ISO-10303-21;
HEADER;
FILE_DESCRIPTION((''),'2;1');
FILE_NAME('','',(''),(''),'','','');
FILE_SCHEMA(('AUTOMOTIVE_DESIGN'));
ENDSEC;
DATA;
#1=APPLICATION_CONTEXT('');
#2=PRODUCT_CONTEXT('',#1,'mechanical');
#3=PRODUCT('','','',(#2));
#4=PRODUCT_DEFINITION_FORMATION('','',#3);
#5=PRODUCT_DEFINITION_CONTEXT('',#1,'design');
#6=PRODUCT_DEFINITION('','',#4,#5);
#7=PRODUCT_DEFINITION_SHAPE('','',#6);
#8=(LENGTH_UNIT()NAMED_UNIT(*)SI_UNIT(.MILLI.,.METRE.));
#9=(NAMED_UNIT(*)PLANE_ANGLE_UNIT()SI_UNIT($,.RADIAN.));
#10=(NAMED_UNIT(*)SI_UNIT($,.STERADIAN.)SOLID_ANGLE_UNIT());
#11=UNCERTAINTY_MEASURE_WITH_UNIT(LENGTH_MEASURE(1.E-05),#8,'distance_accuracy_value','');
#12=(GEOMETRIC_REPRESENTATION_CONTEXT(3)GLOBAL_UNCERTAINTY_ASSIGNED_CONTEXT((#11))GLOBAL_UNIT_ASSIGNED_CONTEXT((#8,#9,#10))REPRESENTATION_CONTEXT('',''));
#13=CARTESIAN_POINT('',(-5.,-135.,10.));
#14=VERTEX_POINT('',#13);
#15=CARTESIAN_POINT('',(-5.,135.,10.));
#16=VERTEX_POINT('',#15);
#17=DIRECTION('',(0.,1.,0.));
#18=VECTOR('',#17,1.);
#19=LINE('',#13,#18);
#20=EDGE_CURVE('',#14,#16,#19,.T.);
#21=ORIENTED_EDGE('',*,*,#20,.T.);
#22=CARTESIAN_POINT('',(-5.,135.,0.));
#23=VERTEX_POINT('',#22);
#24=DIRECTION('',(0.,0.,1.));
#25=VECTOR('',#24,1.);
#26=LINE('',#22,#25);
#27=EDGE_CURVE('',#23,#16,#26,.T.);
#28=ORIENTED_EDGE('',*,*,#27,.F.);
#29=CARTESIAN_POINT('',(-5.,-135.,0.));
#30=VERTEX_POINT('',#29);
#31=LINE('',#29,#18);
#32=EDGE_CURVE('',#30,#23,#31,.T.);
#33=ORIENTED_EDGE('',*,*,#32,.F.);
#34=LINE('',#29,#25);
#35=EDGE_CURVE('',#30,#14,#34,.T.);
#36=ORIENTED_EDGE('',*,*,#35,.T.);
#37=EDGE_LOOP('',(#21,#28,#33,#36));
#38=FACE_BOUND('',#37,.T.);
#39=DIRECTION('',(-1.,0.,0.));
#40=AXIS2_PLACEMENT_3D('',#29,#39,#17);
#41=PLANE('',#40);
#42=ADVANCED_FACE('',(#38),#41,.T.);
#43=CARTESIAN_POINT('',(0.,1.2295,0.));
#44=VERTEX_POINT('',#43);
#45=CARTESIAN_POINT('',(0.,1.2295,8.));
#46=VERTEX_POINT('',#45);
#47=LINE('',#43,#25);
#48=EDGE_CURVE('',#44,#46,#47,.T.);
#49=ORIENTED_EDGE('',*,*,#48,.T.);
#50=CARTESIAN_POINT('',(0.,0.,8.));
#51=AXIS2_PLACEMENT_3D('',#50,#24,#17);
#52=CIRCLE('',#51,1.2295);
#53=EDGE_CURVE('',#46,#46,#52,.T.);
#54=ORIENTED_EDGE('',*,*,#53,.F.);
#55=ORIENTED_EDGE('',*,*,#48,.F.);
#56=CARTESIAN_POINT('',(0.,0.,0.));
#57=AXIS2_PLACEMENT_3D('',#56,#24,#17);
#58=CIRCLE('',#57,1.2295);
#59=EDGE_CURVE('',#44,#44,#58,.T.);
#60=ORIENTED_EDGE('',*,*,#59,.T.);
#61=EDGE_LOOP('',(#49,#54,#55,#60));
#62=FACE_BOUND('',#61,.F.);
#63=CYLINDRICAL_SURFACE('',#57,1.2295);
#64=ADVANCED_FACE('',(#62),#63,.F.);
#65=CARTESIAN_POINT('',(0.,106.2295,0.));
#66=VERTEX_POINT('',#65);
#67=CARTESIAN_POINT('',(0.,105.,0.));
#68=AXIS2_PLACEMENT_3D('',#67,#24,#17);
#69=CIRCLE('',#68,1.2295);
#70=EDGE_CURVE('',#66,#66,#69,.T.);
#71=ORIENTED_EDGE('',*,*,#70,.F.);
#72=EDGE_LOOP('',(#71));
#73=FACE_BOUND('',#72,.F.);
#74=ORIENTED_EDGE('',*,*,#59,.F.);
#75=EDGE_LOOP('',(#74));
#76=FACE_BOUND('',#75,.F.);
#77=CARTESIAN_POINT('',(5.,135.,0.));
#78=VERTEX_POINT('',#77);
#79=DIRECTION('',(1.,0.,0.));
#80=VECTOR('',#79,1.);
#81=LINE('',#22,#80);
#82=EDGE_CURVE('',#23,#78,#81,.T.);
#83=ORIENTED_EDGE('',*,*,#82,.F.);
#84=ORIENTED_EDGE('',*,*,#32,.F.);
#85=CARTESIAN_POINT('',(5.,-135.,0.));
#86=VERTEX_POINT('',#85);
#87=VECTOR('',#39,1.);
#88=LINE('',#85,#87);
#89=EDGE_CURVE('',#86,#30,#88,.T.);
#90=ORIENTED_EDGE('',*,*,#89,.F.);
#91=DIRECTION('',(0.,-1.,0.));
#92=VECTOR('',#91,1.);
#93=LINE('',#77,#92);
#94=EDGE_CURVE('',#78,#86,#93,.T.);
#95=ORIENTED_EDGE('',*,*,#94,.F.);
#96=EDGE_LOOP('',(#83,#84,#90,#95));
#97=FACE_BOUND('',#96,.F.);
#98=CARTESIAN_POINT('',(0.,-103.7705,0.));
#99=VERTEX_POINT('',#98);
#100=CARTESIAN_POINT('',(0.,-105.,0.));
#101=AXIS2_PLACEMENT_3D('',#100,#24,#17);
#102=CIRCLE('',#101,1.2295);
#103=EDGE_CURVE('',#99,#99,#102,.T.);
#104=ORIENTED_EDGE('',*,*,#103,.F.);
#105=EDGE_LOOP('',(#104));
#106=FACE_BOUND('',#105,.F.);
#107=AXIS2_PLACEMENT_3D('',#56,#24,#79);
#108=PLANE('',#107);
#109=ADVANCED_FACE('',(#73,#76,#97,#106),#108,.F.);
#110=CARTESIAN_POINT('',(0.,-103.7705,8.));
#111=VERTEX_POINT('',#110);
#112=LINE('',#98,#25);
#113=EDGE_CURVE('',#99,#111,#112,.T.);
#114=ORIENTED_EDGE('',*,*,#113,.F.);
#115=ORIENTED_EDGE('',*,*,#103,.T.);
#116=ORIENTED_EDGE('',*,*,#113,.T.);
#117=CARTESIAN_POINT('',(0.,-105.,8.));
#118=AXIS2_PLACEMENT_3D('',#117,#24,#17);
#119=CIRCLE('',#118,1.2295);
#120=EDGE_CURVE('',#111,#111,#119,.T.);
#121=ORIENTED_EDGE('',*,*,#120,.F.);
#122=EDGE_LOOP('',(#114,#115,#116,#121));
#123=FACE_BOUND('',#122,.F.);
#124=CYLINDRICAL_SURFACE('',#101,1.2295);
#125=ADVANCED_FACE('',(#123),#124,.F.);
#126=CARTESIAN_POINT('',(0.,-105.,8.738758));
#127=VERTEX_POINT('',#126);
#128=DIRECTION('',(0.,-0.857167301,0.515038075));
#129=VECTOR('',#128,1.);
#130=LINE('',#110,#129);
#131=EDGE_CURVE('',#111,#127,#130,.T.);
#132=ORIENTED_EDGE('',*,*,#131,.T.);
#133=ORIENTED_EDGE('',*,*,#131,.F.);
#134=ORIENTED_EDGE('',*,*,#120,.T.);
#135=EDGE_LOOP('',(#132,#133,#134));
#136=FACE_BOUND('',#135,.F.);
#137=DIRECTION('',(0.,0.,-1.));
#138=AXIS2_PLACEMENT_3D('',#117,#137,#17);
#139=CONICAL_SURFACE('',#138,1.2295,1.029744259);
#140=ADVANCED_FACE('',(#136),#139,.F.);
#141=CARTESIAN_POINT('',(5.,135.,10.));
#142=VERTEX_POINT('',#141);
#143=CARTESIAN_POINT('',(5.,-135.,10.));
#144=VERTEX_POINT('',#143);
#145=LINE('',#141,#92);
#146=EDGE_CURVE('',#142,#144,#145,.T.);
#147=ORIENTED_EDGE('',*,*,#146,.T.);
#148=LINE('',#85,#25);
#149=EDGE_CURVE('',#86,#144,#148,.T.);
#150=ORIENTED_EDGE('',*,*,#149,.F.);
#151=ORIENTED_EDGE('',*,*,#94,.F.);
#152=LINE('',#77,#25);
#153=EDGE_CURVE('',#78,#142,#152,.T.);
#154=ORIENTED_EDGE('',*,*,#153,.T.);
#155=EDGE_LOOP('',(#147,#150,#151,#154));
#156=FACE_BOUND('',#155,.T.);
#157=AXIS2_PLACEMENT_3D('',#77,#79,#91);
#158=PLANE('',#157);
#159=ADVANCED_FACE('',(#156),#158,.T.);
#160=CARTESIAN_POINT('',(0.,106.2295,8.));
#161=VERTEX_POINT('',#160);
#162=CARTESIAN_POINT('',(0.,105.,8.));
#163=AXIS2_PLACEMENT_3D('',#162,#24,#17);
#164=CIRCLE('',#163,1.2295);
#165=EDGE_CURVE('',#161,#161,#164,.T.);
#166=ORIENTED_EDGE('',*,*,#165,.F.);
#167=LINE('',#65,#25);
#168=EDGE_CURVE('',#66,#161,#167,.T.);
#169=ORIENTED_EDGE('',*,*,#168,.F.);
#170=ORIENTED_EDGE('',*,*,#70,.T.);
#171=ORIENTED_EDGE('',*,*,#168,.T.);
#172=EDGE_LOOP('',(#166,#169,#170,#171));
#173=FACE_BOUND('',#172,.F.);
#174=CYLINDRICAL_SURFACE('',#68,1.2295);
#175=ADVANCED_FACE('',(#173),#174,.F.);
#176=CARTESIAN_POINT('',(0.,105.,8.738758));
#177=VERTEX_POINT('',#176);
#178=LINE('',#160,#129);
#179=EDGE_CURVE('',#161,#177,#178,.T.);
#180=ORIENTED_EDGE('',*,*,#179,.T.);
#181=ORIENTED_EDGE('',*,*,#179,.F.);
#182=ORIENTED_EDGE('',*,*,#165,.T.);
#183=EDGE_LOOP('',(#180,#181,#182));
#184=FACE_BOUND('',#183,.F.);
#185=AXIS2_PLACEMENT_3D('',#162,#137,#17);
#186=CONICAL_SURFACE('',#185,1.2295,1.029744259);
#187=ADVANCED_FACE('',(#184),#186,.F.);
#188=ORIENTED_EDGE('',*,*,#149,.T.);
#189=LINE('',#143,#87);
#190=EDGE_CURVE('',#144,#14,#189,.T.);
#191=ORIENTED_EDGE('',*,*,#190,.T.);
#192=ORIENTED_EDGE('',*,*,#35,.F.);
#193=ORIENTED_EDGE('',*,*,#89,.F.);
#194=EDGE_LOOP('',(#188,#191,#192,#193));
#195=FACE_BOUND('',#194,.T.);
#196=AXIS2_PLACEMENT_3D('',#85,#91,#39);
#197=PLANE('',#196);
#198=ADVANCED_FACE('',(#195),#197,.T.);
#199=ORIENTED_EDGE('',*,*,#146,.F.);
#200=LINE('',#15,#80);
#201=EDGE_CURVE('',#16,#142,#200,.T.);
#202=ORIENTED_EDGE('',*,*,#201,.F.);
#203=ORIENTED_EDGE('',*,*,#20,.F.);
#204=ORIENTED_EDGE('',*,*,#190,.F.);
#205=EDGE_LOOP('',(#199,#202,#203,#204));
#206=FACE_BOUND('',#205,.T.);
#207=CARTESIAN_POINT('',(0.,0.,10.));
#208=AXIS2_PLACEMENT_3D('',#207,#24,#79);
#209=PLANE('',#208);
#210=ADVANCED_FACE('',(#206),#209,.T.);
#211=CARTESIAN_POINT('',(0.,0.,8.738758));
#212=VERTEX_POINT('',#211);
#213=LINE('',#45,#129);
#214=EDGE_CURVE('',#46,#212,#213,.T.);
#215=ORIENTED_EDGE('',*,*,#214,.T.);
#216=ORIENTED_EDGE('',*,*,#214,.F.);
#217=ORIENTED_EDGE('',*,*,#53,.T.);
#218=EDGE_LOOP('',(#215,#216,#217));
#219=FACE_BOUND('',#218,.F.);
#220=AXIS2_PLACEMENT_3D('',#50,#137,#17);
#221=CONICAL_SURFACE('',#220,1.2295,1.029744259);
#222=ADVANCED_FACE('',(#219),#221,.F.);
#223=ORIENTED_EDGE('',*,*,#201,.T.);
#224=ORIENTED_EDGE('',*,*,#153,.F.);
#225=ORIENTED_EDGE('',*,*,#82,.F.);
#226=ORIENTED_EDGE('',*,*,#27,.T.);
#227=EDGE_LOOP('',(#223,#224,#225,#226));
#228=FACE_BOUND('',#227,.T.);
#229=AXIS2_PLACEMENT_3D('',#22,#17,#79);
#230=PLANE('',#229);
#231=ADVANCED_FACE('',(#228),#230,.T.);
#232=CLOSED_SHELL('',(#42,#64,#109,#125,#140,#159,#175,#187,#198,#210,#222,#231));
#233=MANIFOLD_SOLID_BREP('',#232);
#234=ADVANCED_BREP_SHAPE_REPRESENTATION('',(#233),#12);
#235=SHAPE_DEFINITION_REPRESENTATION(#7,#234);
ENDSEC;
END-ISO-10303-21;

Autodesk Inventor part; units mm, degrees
ref_plane "YZ Plane" through (0, 0, 0) normal (1, 0, 0) x (0, 1, 0)
ref_plane "XZ Plane" through (0, 0, 0) normal (0, 1, 0) x (-1, 0, 0)
ref_plane "XY Plane" through (0, 0, 0) normal (0, 0, 1) x (1, 0, 0)
sketch "Esboço1" plane through (0, 0, 0) normal (0, 0, 1) x (1, 0, 0)
  line L0 (-7, 0) -> (7, 0) construction
  line L1 (0, -189) -> (0, 189) construction
  line L2 (-5, 135) -> (5, 135)
  line L3 (5, 135) -> (5, -135)
  line L4 (5, -135) -> (-5, -135)
  line L5 (-5, -135) -> (-5, 135)
  point P0 (0, 0)
  point P1 (0, -105)
  point P2 (0, 0)
  point P3 (0, 105)
  dimension "d0" = 10
  dimension "d1" = 270
  dimension "d4" = 105
extrude "Extrusão1" add sketch "Esboço1" along normal blind 10
hole "Furo1" at (0, -105, 0) at (0, 0, 0) at (0, 105, 0) direction (0, 0, 1) diameter 2.459 depth 8 tip angle 118 thread size "M3x0.5" class "6H" standard "ISO Metric profile"
equation "\"d2\" = d0"
properties part number "VEJ-00-013" material "Durastone BK"
